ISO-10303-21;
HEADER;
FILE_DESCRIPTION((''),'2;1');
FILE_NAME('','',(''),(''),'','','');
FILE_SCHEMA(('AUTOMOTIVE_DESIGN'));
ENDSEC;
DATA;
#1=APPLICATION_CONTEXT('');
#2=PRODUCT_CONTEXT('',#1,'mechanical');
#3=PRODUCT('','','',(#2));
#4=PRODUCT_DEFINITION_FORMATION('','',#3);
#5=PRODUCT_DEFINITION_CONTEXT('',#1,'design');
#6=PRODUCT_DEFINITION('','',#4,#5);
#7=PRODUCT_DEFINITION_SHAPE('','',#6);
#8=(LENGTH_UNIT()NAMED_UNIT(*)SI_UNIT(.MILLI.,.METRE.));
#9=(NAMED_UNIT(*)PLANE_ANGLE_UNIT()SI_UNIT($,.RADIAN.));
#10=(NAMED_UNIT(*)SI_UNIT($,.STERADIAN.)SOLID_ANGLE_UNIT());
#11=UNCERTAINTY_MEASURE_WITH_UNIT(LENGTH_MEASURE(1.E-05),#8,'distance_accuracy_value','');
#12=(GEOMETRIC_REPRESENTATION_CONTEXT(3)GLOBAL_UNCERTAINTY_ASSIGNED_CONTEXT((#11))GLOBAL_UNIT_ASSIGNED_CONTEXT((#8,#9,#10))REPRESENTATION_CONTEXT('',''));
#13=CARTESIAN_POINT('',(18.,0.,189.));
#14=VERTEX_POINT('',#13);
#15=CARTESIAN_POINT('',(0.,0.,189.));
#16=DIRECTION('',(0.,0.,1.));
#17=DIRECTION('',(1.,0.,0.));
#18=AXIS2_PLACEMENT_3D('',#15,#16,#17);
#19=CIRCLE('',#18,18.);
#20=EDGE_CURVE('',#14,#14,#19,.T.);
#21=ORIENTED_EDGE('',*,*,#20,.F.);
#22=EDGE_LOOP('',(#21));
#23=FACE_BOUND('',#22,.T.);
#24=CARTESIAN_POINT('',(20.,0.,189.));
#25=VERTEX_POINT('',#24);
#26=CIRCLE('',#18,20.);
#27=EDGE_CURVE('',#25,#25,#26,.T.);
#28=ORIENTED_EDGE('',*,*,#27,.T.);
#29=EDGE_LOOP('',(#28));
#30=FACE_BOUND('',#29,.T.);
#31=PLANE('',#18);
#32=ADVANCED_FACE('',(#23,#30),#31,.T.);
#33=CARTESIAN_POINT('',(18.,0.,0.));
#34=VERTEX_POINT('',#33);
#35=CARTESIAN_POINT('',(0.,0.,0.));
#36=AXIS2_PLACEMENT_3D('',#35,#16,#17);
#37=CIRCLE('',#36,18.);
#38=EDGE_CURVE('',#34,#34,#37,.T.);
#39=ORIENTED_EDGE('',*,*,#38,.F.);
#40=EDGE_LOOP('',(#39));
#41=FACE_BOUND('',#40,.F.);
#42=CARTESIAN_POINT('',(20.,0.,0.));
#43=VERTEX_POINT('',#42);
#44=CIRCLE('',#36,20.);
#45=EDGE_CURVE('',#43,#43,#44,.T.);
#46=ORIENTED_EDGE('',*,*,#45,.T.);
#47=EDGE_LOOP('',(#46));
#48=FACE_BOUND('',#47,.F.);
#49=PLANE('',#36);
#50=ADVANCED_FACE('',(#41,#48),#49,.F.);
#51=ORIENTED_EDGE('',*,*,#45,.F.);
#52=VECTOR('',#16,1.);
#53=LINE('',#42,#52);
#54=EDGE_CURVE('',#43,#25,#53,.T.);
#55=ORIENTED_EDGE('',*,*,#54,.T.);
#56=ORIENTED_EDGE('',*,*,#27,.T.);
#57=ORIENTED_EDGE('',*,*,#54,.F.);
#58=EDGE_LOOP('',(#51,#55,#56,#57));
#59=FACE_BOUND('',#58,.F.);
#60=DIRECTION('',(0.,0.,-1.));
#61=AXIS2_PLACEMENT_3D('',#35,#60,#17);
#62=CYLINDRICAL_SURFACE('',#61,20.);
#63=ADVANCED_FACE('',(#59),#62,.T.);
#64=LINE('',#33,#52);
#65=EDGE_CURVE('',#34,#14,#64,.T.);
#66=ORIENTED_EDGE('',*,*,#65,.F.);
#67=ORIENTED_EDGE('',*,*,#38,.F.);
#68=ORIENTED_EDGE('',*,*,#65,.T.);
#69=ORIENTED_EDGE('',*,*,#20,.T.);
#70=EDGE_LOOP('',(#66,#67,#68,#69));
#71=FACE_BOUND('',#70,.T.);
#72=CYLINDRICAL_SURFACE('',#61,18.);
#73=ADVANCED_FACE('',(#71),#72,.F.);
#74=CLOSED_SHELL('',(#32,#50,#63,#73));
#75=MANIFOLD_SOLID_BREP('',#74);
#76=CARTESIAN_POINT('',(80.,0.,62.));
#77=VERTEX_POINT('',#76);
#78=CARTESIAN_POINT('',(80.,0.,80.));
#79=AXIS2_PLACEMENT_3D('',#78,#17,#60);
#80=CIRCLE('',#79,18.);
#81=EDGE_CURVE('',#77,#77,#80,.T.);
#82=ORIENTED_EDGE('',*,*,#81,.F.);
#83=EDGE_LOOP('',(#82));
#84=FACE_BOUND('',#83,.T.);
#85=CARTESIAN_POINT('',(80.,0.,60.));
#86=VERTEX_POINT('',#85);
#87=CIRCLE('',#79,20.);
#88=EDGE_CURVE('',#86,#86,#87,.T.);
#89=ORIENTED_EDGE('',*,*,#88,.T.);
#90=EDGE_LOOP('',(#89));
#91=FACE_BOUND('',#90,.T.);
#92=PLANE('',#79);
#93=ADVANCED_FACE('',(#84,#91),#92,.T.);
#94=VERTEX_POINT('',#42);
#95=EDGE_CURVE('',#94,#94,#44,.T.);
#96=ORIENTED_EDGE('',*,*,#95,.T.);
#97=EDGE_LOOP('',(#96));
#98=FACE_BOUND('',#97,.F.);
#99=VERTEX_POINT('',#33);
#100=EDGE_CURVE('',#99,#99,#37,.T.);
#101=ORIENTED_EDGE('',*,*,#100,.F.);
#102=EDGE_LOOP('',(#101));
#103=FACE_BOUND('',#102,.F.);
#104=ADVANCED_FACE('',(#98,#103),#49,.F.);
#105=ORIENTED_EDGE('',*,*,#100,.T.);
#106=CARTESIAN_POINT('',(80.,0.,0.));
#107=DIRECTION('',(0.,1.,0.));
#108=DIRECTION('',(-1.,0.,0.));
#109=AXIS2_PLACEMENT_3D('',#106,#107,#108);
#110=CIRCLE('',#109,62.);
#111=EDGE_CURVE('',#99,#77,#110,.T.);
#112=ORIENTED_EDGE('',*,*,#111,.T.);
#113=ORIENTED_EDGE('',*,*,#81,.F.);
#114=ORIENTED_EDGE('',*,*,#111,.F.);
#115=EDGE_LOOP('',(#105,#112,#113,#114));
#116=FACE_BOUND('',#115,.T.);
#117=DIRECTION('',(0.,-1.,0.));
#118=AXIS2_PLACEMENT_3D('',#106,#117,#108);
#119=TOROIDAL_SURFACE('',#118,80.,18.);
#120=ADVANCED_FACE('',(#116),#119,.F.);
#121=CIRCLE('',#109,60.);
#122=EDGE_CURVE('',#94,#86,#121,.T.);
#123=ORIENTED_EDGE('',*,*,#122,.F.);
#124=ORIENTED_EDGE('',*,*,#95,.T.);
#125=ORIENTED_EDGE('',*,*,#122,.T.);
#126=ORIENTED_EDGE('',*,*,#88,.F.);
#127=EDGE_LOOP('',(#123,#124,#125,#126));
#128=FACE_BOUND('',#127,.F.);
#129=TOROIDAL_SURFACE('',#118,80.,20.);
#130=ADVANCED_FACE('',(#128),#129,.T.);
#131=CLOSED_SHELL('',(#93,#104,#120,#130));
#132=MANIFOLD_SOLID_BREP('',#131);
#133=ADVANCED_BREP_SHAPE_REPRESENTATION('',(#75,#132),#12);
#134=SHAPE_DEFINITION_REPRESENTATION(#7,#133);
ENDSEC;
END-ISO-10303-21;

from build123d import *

# Parameters (mm, degrees)
F0_R     = 20
F1_DEPTH = 189
F3_ANGLE = 90
F4_T     = -2
F4_2_T   = -2


with BuildPart() as f1:
    # F0 (on Top) → F1 (new body)
    with BuildSketch(Plane.XY):
        Circle(F0_R)
    extrude(amount=F1_DEPTH)

    # F4#2
    f4_2_openings = [f1.faces().sort_by_distance(p)[0] for p in [
        (0, 0, 0),
        (0, 0, 189),
    ]]
    offset(amount=F4_2_T, openings=f4_2_openings)


with BuildPart() as f3:
    # F0 (on Top) → F3 (revolve)
    with BuildSketch(Plane.XY):
        Circle(F0_R)
    revolve(axis=Axis((80, 46.6175764806, 0), (0, 1, 0)), revolution_arc=F3_ANGLE)

    # F4
    f4_openings = [f3.faces().sort_by_distance(p)[0] for p in [
        (80, 0, 80),
        (0, 0, 0),
    ]]
    offset(amount=F4_T, openings=f4_openings)


solid = Compound([f1.part, f3.part])
